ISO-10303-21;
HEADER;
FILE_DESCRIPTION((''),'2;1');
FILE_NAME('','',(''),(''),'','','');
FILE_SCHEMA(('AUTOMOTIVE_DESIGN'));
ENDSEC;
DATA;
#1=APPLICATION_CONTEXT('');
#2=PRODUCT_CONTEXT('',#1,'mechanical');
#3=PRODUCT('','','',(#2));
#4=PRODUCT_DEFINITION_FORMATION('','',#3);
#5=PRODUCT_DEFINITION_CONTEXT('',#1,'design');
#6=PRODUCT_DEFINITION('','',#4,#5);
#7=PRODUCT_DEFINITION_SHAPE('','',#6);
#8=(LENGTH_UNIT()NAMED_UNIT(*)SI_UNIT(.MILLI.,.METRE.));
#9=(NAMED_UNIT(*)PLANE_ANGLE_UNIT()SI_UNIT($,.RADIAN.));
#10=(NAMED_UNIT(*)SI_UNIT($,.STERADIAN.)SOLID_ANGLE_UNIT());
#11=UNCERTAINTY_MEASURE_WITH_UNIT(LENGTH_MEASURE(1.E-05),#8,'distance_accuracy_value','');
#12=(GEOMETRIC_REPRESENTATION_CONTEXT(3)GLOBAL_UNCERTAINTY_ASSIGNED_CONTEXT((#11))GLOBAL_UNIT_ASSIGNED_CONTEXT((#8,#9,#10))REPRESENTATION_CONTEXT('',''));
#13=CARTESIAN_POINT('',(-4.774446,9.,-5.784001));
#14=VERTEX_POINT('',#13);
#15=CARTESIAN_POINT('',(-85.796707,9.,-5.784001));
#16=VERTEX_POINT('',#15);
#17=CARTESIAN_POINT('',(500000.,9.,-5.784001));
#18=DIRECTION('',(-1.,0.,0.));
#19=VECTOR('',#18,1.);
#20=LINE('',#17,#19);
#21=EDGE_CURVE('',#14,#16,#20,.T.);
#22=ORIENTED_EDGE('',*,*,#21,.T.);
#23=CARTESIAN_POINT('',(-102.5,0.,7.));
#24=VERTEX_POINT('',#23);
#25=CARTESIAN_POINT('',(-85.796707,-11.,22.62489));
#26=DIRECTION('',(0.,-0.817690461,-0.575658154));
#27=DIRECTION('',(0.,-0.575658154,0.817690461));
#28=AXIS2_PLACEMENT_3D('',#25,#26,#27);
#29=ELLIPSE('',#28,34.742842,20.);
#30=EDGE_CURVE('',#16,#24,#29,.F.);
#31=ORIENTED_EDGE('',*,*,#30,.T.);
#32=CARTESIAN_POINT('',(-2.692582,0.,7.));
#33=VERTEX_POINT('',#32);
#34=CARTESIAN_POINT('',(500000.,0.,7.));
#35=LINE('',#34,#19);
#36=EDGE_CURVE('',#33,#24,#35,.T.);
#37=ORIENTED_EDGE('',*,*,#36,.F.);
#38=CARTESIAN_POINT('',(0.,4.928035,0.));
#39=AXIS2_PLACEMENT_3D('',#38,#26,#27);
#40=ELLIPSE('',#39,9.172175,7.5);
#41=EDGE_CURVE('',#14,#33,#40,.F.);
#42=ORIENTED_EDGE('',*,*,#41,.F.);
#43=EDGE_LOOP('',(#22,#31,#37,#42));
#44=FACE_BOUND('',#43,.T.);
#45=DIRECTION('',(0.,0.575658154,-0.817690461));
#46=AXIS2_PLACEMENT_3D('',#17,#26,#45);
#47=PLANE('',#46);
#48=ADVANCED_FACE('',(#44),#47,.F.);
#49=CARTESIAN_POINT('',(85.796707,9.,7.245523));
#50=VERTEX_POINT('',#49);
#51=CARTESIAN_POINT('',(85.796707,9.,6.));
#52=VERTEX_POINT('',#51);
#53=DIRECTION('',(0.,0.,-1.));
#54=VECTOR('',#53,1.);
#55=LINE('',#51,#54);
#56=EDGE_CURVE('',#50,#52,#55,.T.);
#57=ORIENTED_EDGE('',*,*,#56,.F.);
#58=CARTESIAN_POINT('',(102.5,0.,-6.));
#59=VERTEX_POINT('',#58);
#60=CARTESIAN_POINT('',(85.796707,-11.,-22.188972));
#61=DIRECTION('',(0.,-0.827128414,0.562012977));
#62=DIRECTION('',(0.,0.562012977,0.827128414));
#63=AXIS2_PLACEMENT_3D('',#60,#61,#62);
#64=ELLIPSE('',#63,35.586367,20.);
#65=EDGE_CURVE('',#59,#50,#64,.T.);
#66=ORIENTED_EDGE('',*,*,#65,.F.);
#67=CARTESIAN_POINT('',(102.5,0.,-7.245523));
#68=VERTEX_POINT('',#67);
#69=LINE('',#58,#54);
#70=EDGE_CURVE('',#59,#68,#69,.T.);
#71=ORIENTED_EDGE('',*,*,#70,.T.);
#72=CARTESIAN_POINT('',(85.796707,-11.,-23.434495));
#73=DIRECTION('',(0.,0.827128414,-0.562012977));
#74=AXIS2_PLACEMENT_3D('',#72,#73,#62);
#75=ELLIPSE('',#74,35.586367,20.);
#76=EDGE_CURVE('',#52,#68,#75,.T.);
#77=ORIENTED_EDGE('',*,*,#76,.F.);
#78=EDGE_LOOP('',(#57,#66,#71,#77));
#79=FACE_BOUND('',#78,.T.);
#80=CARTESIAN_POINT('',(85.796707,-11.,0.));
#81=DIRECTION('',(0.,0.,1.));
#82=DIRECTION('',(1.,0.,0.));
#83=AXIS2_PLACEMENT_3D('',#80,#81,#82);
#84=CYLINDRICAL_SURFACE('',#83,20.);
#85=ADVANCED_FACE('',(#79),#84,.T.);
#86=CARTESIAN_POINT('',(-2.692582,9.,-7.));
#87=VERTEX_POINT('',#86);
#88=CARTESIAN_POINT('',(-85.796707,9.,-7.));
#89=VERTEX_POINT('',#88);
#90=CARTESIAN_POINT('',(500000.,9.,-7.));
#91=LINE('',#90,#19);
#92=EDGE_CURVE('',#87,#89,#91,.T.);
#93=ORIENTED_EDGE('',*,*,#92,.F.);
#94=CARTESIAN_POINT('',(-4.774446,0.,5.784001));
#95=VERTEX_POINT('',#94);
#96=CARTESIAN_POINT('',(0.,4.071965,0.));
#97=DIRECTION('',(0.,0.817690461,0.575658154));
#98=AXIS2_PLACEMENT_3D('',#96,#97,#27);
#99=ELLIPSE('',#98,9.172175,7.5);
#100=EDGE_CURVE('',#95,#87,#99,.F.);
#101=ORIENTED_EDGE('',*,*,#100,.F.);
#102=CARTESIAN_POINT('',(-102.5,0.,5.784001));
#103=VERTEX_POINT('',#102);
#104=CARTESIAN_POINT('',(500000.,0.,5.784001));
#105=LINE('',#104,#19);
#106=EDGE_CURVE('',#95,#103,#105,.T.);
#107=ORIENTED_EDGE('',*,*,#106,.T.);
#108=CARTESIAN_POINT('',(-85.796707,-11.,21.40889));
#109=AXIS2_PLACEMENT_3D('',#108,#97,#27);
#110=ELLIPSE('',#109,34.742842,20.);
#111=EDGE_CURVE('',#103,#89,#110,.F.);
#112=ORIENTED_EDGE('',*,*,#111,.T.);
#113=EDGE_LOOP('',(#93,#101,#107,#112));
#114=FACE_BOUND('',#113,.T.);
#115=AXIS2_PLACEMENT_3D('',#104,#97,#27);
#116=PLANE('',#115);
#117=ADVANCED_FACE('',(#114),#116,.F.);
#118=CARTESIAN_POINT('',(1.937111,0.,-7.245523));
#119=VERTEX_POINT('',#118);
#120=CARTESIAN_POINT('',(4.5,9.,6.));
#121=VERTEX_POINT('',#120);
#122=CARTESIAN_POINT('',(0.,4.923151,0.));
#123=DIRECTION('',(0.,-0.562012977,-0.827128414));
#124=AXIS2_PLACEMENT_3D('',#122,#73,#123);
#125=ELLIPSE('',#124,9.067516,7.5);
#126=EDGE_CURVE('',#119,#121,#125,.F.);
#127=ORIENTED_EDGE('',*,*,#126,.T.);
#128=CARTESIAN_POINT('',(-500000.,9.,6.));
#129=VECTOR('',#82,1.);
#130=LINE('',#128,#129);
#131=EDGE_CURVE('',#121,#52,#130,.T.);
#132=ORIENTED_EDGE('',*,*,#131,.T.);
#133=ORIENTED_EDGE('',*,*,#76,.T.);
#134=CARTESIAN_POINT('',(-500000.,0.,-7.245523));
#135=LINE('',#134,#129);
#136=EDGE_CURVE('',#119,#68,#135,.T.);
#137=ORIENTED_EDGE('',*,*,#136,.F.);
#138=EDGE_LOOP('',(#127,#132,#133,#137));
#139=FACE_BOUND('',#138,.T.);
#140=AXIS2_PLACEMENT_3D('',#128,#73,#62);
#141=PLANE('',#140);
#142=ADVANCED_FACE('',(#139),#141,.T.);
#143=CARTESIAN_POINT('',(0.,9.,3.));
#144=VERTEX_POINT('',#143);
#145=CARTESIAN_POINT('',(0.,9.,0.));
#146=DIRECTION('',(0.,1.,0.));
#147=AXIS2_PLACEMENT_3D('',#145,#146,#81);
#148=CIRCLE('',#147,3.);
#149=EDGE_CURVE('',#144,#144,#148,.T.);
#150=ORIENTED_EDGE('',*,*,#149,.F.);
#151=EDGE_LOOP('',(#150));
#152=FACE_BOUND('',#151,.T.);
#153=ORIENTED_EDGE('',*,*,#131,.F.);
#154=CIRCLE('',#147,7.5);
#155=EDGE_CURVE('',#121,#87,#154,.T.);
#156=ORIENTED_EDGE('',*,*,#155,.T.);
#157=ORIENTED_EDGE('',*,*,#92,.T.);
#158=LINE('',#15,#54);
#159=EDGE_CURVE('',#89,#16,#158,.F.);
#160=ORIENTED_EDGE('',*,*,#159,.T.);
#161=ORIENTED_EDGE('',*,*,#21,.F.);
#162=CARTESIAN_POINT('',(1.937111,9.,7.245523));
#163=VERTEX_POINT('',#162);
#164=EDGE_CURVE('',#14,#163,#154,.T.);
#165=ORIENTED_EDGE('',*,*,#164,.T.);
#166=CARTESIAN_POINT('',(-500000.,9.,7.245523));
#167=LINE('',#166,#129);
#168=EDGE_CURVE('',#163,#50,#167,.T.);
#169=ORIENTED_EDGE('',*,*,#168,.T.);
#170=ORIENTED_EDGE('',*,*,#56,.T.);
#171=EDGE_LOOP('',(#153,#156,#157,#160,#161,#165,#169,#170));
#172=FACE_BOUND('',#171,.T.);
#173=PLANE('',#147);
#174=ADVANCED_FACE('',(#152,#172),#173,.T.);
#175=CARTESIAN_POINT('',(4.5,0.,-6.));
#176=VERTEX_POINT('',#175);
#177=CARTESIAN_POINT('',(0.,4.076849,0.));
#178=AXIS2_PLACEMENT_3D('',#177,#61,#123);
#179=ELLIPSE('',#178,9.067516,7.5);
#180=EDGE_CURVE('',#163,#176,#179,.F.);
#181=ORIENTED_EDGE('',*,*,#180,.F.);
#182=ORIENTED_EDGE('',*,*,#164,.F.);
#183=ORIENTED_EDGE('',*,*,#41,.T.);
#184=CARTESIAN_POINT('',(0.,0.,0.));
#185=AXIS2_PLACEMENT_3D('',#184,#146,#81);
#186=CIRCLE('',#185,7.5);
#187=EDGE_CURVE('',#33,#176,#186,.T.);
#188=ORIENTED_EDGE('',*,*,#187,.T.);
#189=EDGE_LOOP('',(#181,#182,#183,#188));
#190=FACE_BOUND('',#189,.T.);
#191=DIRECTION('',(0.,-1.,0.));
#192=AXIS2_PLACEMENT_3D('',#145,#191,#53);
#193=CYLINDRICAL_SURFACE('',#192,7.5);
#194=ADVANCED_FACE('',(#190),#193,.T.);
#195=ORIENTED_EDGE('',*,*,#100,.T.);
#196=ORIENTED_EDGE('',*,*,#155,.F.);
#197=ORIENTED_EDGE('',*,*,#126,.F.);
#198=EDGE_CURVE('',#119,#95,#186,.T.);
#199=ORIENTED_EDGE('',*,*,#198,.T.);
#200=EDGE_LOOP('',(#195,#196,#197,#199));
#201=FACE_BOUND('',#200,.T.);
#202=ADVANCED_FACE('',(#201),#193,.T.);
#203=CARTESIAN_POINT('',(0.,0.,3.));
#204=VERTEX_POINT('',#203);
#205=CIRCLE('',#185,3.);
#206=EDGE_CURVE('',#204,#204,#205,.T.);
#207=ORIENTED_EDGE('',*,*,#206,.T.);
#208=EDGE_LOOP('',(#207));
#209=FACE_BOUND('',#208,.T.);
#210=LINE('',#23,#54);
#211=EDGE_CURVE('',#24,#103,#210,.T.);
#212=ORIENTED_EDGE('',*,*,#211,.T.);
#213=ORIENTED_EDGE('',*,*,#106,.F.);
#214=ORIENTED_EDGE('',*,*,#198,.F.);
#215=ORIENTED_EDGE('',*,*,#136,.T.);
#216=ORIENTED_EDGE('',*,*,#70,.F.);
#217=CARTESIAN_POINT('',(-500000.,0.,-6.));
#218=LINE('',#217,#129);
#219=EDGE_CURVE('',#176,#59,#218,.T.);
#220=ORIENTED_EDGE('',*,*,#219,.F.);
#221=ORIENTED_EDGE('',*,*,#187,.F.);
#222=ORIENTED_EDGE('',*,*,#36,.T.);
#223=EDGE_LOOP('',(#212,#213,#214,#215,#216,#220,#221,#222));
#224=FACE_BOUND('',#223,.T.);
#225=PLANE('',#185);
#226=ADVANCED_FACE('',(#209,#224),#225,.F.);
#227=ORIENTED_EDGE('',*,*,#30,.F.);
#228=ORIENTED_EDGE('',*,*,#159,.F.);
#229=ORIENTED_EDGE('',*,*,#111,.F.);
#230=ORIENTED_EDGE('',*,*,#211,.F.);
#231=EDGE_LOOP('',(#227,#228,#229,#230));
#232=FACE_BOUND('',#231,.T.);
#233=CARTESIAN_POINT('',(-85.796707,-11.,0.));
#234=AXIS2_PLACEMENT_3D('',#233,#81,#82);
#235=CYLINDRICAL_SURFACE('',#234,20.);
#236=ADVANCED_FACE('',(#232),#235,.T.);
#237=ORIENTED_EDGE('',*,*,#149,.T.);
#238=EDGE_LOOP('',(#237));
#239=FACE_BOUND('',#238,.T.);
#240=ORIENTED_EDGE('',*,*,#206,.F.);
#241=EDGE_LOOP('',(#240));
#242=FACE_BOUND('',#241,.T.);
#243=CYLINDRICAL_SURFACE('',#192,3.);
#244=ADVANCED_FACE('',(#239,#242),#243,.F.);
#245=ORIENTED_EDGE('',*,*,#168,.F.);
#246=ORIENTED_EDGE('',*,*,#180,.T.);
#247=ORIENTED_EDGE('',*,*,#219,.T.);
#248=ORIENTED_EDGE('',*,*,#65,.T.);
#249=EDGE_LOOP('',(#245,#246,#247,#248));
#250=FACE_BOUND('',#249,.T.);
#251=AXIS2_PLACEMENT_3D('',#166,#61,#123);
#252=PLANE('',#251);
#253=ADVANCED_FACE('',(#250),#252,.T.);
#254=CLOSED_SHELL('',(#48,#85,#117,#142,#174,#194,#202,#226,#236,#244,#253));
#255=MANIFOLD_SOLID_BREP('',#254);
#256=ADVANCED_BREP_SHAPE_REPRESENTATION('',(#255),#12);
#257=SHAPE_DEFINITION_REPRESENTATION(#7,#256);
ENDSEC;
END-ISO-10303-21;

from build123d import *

# Parameters (mm, degrees)
SKETCH1_R                = 7.5
SKETCH1_R_2              = 3
BOSS_EXTRUDE1_DEPTH      = 9
BOSS_EXTRUDE2_REACH      = 112.622
BOSS_EXTRUDE2_END_RADIUS = 7.5
BOSS_EXTRUDE3_REACH      = 207.334
BOSS_EXTRUDE3_END_RADIUS = 7.5
FILLET1_START            = -7.245522841
FILLET1_DEPTH            = 14.745522841


with BuildPart() as part:
    # Sketch1 → Boss-Extrude1 (new body)
    with BuildSketch(Plane(origin=(0, 0, 0), x_dir=(1, 0, 0), z_dir=(0, 1, 0))):
        with Locations(Location((0, 0, 0), (0, 0, 270))):
            Circle(SKETCH1_R)
        with Locations(Location((0, 0, 0), (0, 0, 270))):
            Circle(SKETCH1_R_2, mode=Mode.SUBTRACT)
    extrude(amount=BOSS_EXTRUDE1_DEPTH)

    # Boss-Extrude2: up to this cylinder (the profile starts outside it)
    boss_extrude2_end = Plane(origin=(0, 4.5, 0), z_dir=(0, -1, 0)) * Cylinder(BOSS_EXTRUDE2_END_RADIUS, 241.244, mode=Mode.PRIVATE)
    # Sketch3 → Boss-Extrude2 (add, up to the surface)
    with BuildSketch(Plane(origin=(102.5, 0, 0), x_dir=(0, 0, -1), z_dir=(1, 0, 0)), mode=Mode.PRIVATE) as boss_extrude2_sk1:
        Polygon((-6, 9), (7.245522841, 0), (6, 0), (-7.245522841, 9), align=None)
    boss_extrude2_tool1 = extrude(boss_extrude2_sk1.sketch, amount=-BOSS_EXTRUDE2_REACH, mode=Mode.PRIVATE) - boss_extrude2_end
    add(boss_extrude2_tool1.solids().sort_by_distance((102.5, 4.5, 0))[0])

    # Boss-Extrude3: up to this cylinder (the profile starts outside it)
    boss_extrude3_end = Plane(origin=(0, 4.5, 0), z_dir=(0, -1, 0)) * Cylinder(BOSS_EXTRUDE3_END_RADIUS, 430.668, mode=Mode.PRIVATE)
    # Sketch5 → Boss-Extrude3 (add, up to the surface)
    with BuildSketch(Plane(origin=(-102.5, 0, 0), x_dir=(0, 0, -1), z_dir=(1, 0, 0)), mode=Mode.PRIVATE) as boss_extrude3_sk1:
        Polygon((5.784000547, 9), (-7, 0), (-5.784000547, 0), (7, 9), align=None)
    boss_extrude3_tool1 = extrude(boss_extrude3_sk1.sketch, amount=BOSS_EXTRUDE3_REACH, mode=Mode.PRIVATE) - boss_extrude3_end
    add(boss_extrude3_tool1.solids().sort_by_distance((-102.5, 4.5, 0))[0])

    # Fillet1: read off the stored shape, not the designer's step
    # Fillet1 outline → Fillet1 (cut)
    with BuildSketch(Plane.XY.offset(FILLET1_START)):
        with BuildLine():
            ThreePointArc((-102.5, 0), (-95.283539892, 6.606816862), (-85.796706912, 9))
            Line((-85.796706912, 9), (-102.5, 9))
            Line((-102.5, 9), (-102.5, 0))
        make_face()
        with BuildLine():
            ThreePointArc((85.796706911, 9), (95.283539892, 6.606816862), (102.5, 0))
            Line((102.5, 0), (102.5, 9))
            Line((102.5, 9), (85.796706911, 9))
        make_face()
    extrude(amount=FILLET1_DEPTH, mode=Mode.SUBTRACT)


solid = part.part
